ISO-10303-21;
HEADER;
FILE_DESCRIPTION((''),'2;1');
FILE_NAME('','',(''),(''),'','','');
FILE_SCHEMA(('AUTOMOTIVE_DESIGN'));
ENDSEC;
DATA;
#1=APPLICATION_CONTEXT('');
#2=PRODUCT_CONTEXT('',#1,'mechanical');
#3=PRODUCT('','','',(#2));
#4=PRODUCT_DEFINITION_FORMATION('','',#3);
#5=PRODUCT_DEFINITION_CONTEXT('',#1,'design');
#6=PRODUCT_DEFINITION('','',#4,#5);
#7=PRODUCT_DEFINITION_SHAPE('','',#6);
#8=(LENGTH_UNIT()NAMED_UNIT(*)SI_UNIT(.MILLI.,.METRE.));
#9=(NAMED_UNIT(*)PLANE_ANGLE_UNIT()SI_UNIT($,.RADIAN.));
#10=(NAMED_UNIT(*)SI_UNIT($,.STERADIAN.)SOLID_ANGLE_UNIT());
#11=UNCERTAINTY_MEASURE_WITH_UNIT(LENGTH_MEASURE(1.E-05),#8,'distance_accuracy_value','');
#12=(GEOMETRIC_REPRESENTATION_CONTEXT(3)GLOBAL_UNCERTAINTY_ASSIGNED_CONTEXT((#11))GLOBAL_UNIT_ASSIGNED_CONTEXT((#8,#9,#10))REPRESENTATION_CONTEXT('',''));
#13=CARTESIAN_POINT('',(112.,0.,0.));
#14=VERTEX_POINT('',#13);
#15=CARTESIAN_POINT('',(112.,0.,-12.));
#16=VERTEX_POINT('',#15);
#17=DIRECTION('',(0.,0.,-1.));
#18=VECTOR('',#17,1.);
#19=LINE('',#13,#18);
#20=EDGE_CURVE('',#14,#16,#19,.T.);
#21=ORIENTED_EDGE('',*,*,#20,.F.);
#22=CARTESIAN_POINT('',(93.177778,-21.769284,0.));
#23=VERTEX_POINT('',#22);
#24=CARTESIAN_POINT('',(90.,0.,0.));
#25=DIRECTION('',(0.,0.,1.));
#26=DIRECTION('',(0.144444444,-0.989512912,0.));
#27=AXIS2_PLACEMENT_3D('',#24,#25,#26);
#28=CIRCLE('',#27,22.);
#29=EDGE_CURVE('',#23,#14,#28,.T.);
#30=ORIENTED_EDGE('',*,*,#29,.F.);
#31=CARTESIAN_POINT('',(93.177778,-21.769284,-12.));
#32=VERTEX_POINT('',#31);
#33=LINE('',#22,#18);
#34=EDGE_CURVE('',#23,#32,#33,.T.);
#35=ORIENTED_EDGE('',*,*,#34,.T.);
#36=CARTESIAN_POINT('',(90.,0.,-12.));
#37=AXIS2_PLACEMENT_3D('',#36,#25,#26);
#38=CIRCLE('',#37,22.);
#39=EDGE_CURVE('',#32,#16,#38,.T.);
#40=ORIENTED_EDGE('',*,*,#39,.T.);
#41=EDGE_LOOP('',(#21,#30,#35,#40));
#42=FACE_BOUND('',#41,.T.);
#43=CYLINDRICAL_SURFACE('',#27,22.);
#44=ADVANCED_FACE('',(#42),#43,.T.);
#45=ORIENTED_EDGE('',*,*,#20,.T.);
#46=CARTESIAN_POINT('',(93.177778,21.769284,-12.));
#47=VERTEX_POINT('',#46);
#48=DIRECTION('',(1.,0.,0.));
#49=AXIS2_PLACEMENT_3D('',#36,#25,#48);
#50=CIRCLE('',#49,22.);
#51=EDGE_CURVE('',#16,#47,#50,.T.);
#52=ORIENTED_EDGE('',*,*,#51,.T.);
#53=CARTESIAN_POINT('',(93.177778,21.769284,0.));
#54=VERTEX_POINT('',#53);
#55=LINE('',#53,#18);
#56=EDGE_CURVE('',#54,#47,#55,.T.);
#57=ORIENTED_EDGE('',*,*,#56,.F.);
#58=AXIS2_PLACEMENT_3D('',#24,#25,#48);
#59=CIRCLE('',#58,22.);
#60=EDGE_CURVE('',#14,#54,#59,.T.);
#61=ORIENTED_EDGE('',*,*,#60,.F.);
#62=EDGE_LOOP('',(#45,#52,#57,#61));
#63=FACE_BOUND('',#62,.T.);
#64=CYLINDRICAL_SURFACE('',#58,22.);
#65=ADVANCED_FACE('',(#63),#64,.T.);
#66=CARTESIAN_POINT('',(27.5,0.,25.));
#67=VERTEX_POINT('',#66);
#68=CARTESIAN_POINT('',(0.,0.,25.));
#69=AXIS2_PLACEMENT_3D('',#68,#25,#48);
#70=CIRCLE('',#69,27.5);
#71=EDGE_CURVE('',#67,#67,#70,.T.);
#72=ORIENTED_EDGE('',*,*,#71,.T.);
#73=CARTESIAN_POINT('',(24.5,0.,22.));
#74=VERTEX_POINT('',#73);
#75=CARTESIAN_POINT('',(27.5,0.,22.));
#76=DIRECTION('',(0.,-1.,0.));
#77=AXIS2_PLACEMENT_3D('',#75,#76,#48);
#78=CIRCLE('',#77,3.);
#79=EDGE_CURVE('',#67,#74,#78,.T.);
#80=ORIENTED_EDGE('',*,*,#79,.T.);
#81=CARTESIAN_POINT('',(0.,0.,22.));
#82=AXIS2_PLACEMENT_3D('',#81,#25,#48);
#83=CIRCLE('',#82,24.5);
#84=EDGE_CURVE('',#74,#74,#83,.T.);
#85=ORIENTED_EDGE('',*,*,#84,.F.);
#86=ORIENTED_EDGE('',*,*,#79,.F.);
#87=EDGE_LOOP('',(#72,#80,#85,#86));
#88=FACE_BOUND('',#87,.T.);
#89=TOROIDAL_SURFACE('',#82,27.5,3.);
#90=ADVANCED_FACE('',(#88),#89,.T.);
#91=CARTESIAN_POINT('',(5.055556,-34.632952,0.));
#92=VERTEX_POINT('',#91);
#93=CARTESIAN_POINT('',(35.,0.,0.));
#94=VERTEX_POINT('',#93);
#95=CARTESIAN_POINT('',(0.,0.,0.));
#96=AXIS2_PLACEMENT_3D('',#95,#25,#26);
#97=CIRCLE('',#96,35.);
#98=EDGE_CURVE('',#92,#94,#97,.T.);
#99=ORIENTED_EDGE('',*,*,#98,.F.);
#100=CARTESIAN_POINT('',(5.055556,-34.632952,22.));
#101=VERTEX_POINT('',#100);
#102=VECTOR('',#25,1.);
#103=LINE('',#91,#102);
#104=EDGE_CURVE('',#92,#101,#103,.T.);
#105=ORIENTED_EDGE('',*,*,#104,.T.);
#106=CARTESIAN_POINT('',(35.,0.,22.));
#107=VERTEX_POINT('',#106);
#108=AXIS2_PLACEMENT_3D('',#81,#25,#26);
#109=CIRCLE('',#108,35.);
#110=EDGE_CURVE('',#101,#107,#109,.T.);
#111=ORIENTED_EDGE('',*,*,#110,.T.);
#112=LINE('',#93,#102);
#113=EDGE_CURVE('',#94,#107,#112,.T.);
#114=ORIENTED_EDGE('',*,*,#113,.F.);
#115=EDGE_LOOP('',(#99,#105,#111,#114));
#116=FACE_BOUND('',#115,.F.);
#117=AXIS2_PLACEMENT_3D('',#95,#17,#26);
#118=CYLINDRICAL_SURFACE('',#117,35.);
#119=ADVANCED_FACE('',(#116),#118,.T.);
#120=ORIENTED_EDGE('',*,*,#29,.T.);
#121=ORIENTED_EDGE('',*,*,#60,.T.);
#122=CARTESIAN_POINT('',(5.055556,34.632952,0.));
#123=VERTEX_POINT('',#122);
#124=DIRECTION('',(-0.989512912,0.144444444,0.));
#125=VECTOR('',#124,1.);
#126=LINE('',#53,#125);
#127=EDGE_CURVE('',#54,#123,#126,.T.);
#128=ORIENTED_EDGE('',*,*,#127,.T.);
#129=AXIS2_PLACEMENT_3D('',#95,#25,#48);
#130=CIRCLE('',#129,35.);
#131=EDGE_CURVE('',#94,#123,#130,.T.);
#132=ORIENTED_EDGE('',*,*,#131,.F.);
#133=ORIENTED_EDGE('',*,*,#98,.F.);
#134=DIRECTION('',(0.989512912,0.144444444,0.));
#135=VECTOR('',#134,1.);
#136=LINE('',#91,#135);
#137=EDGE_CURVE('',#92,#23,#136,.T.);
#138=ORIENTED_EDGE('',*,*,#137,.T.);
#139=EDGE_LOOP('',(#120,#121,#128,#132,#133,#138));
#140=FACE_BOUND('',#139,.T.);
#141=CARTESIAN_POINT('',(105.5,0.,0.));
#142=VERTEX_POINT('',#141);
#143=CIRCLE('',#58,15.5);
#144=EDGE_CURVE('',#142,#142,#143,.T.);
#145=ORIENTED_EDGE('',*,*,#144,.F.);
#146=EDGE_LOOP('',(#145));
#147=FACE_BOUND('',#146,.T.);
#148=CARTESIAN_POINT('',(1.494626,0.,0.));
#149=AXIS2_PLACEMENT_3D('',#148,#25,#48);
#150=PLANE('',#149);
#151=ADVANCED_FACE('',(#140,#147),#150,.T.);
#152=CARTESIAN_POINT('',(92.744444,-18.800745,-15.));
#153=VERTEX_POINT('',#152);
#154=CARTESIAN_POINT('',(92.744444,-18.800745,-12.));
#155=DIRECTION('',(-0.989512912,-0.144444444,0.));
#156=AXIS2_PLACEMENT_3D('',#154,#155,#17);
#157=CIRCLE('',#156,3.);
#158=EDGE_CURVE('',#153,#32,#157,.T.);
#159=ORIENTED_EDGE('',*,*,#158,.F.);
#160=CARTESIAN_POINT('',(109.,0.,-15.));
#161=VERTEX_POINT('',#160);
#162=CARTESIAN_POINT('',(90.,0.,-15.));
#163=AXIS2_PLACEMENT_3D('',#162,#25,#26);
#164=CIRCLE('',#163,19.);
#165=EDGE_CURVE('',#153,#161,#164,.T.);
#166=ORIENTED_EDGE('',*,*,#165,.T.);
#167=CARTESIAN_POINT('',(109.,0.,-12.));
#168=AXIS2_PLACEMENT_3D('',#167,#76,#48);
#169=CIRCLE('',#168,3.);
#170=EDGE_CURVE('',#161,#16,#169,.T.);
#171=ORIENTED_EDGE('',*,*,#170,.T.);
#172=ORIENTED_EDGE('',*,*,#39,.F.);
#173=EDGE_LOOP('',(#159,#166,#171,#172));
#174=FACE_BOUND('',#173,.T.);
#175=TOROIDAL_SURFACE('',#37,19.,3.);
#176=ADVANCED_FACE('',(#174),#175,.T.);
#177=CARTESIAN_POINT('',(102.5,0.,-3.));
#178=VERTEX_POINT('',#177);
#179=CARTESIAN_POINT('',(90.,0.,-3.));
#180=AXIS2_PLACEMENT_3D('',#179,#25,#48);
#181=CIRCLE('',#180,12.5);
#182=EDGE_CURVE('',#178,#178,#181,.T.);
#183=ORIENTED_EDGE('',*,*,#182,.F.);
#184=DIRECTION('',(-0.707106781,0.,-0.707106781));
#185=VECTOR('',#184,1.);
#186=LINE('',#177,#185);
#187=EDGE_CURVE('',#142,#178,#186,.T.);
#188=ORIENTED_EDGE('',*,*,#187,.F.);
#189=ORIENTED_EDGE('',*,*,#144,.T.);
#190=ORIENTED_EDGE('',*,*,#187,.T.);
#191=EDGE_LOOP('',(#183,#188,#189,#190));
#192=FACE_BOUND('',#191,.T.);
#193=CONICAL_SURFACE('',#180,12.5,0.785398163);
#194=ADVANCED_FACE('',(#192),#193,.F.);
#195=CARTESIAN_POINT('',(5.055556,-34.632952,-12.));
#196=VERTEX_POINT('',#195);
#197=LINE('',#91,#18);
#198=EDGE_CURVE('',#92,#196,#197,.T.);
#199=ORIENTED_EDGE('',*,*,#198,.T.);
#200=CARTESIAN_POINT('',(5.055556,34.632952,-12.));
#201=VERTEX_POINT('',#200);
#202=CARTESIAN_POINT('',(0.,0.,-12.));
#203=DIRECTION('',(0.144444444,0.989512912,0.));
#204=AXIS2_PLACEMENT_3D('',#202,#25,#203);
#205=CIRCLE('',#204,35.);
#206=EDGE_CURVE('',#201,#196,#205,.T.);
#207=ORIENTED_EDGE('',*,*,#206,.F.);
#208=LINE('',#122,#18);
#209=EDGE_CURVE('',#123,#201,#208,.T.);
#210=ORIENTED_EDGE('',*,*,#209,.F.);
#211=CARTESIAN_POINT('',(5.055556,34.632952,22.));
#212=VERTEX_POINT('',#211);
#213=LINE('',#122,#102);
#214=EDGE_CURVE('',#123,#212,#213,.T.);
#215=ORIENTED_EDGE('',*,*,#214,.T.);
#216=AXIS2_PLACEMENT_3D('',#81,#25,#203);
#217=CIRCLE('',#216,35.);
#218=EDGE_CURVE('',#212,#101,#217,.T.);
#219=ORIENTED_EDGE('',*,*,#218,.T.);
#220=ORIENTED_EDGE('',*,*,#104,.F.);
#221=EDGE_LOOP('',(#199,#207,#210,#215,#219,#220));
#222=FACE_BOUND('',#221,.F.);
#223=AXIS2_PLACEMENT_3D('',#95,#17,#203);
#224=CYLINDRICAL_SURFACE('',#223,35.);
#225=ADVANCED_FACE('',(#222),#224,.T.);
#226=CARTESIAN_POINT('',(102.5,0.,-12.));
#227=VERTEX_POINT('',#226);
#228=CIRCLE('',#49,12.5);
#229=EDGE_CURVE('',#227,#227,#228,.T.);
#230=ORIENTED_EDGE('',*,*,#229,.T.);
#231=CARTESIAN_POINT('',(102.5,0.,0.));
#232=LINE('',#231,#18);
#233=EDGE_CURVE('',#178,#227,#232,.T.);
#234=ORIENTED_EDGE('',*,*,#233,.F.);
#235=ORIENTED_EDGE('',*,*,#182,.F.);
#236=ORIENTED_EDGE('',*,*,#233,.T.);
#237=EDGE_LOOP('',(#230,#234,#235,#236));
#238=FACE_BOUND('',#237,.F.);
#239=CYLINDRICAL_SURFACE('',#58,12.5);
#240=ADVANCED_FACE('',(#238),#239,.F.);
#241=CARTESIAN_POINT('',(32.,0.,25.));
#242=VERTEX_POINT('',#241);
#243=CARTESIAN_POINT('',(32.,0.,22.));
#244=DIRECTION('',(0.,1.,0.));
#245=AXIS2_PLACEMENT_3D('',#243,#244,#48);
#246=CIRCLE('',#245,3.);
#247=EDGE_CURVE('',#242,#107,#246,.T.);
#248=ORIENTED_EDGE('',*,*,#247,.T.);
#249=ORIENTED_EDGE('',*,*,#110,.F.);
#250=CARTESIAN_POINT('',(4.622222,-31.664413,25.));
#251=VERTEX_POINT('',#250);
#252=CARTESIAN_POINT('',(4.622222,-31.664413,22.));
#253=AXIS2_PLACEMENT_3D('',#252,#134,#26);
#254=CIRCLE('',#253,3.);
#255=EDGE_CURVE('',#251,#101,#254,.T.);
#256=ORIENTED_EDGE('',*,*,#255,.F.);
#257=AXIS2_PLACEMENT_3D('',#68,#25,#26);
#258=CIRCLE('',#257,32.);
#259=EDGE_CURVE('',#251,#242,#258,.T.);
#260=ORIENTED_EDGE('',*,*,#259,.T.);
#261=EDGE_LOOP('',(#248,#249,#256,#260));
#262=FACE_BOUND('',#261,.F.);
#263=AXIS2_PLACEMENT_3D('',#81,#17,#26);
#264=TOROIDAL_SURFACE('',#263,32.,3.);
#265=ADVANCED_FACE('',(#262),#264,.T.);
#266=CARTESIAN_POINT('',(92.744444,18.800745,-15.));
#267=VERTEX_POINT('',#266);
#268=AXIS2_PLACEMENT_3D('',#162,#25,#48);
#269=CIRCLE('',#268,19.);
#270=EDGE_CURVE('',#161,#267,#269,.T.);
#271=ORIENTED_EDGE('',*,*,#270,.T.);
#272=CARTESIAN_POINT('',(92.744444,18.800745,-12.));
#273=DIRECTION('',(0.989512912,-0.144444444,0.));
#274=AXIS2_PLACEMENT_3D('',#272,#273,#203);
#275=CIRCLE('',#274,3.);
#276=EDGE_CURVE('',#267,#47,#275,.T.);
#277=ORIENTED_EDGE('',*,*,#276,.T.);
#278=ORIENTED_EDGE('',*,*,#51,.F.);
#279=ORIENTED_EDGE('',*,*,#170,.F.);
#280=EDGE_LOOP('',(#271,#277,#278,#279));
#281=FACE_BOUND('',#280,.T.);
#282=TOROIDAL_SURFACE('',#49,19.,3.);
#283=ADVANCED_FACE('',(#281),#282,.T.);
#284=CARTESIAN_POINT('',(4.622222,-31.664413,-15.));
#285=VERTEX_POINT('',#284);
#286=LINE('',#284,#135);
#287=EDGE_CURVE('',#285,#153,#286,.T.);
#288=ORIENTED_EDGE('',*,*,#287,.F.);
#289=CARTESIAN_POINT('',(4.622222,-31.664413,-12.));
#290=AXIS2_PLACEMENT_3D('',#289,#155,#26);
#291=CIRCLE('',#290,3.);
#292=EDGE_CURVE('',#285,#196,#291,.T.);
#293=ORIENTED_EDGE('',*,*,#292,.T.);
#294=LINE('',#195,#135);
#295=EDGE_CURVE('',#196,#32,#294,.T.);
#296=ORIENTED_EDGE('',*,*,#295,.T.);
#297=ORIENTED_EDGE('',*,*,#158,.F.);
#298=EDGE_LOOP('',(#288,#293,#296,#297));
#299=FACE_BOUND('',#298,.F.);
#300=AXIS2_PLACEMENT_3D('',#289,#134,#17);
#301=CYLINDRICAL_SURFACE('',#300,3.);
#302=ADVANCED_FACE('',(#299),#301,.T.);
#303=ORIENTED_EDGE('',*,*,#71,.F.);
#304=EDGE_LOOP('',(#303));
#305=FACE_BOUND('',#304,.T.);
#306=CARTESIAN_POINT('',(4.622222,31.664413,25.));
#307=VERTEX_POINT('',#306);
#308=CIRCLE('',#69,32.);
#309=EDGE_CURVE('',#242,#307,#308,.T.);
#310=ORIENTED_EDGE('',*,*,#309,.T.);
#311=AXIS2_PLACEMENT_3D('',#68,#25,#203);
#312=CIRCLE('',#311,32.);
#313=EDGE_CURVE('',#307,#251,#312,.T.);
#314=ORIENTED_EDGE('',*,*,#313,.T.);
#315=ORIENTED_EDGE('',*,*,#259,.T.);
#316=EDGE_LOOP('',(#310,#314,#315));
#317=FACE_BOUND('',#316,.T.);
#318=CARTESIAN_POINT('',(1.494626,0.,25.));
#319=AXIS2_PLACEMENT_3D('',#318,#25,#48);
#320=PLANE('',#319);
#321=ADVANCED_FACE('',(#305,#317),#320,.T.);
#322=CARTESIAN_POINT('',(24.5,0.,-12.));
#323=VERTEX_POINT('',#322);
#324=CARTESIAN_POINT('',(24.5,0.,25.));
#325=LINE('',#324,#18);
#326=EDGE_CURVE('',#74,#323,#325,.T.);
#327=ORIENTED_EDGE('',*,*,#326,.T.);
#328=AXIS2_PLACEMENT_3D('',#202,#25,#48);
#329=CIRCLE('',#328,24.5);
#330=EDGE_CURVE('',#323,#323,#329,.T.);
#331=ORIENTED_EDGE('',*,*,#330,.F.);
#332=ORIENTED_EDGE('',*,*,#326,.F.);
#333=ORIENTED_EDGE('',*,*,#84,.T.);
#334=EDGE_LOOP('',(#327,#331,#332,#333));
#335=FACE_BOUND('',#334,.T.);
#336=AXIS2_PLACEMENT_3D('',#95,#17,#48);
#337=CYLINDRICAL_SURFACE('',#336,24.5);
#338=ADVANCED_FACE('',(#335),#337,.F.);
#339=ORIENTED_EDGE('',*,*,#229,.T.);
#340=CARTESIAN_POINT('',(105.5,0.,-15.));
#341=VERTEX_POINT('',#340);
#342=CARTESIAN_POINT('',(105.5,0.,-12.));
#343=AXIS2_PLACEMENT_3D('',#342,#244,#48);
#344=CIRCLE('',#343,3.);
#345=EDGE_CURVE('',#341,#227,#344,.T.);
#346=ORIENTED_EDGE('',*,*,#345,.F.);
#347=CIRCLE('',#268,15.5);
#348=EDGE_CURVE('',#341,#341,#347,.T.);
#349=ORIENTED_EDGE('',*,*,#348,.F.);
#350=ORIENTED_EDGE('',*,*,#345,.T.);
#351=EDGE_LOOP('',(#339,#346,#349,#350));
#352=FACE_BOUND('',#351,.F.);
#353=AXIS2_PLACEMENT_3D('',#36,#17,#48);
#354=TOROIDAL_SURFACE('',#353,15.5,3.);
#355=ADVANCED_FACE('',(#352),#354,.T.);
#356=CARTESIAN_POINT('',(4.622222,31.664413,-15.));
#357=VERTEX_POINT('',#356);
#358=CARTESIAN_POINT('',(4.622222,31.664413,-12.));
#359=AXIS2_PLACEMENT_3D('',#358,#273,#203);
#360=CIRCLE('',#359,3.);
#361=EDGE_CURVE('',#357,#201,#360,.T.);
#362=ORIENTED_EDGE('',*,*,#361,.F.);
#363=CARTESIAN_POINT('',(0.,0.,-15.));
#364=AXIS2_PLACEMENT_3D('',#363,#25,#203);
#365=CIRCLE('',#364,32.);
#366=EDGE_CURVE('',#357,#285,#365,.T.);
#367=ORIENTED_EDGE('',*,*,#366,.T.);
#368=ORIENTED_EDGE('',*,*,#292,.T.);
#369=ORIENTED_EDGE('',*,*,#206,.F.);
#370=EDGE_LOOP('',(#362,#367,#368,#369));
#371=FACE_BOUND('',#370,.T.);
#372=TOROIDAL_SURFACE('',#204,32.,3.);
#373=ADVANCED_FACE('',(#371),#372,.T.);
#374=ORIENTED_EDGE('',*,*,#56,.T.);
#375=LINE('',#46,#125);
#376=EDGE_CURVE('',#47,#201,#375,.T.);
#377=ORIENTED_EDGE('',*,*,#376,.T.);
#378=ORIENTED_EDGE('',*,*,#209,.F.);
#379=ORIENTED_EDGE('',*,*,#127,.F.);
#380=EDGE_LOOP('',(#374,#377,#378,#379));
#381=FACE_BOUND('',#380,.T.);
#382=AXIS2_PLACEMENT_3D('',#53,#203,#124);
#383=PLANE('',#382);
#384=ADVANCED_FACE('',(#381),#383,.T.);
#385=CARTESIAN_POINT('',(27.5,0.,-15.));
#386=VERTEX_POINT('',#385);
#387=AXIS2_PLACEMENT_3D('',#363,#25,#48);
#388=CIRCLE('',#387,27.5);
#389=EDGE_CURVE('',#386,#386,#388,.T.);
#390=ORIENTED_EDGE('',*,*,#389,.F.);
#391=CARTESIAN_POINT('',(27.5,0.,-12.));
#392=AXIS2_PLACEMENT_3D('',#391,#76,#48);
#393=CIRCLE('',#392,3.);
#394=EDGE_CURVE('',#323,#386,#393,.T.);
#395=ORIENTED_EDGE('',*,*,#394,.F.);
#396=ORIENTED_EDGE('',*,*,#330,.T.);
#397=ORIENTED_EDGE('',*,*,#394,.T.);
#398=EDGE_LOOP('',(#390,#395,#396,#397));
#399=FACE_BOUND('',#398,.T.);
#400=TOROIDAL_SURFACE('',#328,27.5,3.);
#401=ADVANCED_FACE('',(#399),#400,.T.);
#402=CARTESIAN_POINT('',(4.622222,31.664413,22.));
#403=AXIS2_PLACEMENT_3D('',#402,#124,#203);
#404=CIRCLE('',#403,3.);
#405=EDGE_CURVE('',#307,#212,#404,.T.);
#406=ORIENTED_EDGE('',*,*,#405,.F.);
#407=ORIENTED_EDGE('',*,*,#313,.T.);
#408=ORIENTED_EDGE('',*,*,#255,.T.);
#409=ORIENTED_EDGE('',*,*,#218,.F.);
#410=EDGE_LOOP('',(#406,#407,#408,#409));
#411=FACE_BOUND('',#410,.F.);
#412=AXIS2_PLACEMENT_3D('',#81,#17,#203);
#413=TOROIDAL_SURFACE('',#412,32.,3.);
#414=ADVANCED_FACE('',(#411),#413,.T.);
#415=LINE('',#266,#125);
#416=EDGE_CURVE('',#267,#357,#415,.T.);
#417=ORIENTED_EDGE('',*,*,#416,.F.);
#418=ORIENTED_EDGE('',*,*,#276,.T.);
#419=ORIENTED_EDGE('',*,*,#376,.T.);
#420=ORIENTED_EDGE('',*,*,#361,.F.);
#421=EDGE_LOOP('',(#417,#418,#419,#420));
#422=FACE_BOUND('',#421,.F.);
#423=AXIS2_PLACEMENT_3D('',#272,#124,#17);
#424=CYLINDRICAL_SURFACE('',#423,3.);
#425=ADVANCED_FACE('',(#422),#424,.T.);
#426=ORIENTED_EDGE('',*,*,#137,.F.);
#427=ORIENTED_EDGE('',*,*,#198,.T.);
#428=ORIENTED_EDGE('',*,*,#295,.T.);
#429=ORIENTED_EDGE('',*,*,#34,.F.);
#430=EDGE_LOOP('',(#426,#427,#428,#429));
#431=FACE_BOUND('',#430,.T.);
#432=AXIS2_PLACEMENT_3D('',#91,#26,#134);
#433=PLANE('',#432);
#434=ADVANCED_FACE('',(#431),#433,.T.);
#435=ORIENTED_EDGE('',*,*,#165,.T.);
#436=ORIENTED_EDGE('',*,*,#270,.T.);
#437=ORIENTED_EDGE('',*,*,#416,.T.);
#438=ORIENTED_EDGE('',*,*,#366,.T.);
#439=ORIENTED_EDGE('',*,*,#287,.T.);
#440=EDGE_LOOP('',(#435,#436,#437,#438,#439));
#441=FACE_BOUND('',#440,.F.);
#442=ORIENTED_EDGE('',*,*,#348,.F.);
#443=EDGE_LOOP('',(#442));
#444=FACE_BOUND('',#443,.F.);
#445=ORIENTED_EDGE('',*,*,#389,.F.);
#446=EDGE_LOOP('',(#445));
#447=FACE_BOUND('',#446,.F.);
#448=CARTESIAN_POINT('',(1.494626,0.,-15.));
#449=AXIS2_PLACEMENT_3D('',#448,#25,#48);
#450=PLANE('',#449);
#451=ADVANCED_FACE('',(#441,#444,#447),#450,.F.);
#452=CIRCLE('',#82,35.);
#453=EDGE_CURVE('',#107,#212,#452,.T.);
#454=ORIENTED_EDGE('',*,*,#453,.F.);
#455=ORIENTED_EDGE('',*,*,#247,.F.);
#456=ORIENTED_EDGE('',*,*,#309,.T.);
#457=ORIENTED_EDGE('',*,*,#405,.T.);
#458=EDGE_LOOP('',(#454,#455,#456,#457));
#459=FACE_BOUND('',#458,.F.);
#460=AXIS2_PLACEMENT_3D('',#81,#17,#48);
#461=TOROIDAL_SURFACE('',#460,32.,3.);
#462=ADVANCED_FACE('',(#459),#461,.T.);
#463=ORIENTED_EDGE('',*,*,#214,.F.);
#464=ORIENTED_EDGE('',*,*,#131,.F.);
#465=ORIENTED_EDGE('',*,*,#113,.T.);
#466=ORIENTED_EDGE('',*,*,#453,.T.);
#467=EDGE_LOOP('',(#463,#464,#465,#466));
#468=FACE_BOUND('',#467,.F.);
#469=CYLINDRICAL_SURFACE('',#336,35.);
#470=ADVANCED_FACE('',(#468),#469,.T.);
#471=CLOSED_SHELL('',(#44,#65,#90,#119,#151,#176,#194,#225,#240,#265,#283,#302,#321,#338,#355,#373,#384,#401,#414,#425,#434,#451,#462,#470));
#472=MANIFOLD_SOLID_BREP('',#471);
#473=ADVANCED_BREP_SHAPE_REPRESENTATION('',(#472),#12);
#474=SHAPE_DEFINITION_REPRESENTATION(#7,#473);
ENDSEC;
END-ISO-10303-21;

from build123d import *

# Parameters (mm, degrees)
F0_R     = 24.5
F0_R_2   = 12.5
F1_DEPTH = 15
F2_DEPTH = 25
F3_R     = 3
F4_SIZE  = 3


# Not quite as in the source:
# - a feature names something its author has since deleted; it is built from what else it names


with BuildPart() as f1:
    # F0 (on Top) → F1 (new body)
    with BuildSketch(Plane.XY):
        with BuildLine():
            ThreePointArc((35, 0), (26.4758800085, 22.8916530154), (5.0555555556, 34.6329519104))
            ThreePointArc((5.0555555556, 34.6329519104), (-35, 0), (5.0555555556, -34.6329519104))
            ThreePointArc((5.0555555556, -34.6329519104), (26.4758800085, -22.8916530154), (35, 0))
        make_face()
        Circle(F0_R, mode=Mode.SUBTRACT)
        with BuildLine():
            Line((93.1777777778, 21.7692840579), (5.0555555556, 34.6329519104))
            ThreePointArc((5.0555555556, 34.6329519104), (26.4758800085, 22.8916530154), (35, 0))
            ThreePointArc((35, 0), (26.4758800085, -22.8916530154), (5.0555555556, -34.6329519104))
            Line((5.0555555556, -34.6329519104), (93.1777777778, -21.7692840579))
            ThreePointArc((93.1777777778, -21.7692840579), (68, 0), (93.1777777778, 21.7692840579))
        make_face()
        with BuildLine():
            ThreePointArc((112, 0), (106.6419817196, 14.3890390383), (93.1777777778, 21.7692840579))
            ThreePointArc((93.1777777778, 21.7692840579), (68, 0), (93.1777777778, -21.7692840579))
            ThreePointArc((93.1777777778, -21.7692840579), (106.6419817196, -14.3890390383), (112, 0))
        make_face()
        with Locations((90, 0)):
            Circle(F0_R_2, mode=Mode.SUBTRACT)
    extrude(amount=-F1_DEPTH)

    # F0 (on Top) → F2 (join)
    with BuildSketch(Plane.XY):
        with BuildLine():
            ThreePointArc((35, 0), (26.4758800085, 22.8916530154), (5.0555555556, 34.6329519104))
            ThreePointArc((5.0555555556, 34.6329519104), (-35, 0), (5.0555555556, -34.6329519104))
            ThreePointArc((5.0555555556, -34.6329519104), (26.4758800085, -22.8916530154), (35, 0))
        make_face()
        Circle(F0_R, mode=Mode.SUBTRACT)
    extrude(amount=F2_DEPTH)

    # F3
    f3_edges = [f1.edges().sort_by_distance(p)[0] for p in [
        (-5.055556, 34.632952, 25),
        (-24.5, 0, 25),
        (-35, 0, -15),
        (49.116667, -28.201118, -15),
        (112, 0, -15),
        (49.116667, 28.201118, -15),
        (-24.5, 0, -15),
        (77.5, 0, -15),
    ]]
    fillet(f3_edges, radius=F3_R)

    # F4
    f4_edges = [f1.edges().sort_by_distance(p)[0] for p in [
        (77.5, 0, 0),
    ]]
    chamfer(f4_edges, length=F4_SIZE)


solid = f1.part
